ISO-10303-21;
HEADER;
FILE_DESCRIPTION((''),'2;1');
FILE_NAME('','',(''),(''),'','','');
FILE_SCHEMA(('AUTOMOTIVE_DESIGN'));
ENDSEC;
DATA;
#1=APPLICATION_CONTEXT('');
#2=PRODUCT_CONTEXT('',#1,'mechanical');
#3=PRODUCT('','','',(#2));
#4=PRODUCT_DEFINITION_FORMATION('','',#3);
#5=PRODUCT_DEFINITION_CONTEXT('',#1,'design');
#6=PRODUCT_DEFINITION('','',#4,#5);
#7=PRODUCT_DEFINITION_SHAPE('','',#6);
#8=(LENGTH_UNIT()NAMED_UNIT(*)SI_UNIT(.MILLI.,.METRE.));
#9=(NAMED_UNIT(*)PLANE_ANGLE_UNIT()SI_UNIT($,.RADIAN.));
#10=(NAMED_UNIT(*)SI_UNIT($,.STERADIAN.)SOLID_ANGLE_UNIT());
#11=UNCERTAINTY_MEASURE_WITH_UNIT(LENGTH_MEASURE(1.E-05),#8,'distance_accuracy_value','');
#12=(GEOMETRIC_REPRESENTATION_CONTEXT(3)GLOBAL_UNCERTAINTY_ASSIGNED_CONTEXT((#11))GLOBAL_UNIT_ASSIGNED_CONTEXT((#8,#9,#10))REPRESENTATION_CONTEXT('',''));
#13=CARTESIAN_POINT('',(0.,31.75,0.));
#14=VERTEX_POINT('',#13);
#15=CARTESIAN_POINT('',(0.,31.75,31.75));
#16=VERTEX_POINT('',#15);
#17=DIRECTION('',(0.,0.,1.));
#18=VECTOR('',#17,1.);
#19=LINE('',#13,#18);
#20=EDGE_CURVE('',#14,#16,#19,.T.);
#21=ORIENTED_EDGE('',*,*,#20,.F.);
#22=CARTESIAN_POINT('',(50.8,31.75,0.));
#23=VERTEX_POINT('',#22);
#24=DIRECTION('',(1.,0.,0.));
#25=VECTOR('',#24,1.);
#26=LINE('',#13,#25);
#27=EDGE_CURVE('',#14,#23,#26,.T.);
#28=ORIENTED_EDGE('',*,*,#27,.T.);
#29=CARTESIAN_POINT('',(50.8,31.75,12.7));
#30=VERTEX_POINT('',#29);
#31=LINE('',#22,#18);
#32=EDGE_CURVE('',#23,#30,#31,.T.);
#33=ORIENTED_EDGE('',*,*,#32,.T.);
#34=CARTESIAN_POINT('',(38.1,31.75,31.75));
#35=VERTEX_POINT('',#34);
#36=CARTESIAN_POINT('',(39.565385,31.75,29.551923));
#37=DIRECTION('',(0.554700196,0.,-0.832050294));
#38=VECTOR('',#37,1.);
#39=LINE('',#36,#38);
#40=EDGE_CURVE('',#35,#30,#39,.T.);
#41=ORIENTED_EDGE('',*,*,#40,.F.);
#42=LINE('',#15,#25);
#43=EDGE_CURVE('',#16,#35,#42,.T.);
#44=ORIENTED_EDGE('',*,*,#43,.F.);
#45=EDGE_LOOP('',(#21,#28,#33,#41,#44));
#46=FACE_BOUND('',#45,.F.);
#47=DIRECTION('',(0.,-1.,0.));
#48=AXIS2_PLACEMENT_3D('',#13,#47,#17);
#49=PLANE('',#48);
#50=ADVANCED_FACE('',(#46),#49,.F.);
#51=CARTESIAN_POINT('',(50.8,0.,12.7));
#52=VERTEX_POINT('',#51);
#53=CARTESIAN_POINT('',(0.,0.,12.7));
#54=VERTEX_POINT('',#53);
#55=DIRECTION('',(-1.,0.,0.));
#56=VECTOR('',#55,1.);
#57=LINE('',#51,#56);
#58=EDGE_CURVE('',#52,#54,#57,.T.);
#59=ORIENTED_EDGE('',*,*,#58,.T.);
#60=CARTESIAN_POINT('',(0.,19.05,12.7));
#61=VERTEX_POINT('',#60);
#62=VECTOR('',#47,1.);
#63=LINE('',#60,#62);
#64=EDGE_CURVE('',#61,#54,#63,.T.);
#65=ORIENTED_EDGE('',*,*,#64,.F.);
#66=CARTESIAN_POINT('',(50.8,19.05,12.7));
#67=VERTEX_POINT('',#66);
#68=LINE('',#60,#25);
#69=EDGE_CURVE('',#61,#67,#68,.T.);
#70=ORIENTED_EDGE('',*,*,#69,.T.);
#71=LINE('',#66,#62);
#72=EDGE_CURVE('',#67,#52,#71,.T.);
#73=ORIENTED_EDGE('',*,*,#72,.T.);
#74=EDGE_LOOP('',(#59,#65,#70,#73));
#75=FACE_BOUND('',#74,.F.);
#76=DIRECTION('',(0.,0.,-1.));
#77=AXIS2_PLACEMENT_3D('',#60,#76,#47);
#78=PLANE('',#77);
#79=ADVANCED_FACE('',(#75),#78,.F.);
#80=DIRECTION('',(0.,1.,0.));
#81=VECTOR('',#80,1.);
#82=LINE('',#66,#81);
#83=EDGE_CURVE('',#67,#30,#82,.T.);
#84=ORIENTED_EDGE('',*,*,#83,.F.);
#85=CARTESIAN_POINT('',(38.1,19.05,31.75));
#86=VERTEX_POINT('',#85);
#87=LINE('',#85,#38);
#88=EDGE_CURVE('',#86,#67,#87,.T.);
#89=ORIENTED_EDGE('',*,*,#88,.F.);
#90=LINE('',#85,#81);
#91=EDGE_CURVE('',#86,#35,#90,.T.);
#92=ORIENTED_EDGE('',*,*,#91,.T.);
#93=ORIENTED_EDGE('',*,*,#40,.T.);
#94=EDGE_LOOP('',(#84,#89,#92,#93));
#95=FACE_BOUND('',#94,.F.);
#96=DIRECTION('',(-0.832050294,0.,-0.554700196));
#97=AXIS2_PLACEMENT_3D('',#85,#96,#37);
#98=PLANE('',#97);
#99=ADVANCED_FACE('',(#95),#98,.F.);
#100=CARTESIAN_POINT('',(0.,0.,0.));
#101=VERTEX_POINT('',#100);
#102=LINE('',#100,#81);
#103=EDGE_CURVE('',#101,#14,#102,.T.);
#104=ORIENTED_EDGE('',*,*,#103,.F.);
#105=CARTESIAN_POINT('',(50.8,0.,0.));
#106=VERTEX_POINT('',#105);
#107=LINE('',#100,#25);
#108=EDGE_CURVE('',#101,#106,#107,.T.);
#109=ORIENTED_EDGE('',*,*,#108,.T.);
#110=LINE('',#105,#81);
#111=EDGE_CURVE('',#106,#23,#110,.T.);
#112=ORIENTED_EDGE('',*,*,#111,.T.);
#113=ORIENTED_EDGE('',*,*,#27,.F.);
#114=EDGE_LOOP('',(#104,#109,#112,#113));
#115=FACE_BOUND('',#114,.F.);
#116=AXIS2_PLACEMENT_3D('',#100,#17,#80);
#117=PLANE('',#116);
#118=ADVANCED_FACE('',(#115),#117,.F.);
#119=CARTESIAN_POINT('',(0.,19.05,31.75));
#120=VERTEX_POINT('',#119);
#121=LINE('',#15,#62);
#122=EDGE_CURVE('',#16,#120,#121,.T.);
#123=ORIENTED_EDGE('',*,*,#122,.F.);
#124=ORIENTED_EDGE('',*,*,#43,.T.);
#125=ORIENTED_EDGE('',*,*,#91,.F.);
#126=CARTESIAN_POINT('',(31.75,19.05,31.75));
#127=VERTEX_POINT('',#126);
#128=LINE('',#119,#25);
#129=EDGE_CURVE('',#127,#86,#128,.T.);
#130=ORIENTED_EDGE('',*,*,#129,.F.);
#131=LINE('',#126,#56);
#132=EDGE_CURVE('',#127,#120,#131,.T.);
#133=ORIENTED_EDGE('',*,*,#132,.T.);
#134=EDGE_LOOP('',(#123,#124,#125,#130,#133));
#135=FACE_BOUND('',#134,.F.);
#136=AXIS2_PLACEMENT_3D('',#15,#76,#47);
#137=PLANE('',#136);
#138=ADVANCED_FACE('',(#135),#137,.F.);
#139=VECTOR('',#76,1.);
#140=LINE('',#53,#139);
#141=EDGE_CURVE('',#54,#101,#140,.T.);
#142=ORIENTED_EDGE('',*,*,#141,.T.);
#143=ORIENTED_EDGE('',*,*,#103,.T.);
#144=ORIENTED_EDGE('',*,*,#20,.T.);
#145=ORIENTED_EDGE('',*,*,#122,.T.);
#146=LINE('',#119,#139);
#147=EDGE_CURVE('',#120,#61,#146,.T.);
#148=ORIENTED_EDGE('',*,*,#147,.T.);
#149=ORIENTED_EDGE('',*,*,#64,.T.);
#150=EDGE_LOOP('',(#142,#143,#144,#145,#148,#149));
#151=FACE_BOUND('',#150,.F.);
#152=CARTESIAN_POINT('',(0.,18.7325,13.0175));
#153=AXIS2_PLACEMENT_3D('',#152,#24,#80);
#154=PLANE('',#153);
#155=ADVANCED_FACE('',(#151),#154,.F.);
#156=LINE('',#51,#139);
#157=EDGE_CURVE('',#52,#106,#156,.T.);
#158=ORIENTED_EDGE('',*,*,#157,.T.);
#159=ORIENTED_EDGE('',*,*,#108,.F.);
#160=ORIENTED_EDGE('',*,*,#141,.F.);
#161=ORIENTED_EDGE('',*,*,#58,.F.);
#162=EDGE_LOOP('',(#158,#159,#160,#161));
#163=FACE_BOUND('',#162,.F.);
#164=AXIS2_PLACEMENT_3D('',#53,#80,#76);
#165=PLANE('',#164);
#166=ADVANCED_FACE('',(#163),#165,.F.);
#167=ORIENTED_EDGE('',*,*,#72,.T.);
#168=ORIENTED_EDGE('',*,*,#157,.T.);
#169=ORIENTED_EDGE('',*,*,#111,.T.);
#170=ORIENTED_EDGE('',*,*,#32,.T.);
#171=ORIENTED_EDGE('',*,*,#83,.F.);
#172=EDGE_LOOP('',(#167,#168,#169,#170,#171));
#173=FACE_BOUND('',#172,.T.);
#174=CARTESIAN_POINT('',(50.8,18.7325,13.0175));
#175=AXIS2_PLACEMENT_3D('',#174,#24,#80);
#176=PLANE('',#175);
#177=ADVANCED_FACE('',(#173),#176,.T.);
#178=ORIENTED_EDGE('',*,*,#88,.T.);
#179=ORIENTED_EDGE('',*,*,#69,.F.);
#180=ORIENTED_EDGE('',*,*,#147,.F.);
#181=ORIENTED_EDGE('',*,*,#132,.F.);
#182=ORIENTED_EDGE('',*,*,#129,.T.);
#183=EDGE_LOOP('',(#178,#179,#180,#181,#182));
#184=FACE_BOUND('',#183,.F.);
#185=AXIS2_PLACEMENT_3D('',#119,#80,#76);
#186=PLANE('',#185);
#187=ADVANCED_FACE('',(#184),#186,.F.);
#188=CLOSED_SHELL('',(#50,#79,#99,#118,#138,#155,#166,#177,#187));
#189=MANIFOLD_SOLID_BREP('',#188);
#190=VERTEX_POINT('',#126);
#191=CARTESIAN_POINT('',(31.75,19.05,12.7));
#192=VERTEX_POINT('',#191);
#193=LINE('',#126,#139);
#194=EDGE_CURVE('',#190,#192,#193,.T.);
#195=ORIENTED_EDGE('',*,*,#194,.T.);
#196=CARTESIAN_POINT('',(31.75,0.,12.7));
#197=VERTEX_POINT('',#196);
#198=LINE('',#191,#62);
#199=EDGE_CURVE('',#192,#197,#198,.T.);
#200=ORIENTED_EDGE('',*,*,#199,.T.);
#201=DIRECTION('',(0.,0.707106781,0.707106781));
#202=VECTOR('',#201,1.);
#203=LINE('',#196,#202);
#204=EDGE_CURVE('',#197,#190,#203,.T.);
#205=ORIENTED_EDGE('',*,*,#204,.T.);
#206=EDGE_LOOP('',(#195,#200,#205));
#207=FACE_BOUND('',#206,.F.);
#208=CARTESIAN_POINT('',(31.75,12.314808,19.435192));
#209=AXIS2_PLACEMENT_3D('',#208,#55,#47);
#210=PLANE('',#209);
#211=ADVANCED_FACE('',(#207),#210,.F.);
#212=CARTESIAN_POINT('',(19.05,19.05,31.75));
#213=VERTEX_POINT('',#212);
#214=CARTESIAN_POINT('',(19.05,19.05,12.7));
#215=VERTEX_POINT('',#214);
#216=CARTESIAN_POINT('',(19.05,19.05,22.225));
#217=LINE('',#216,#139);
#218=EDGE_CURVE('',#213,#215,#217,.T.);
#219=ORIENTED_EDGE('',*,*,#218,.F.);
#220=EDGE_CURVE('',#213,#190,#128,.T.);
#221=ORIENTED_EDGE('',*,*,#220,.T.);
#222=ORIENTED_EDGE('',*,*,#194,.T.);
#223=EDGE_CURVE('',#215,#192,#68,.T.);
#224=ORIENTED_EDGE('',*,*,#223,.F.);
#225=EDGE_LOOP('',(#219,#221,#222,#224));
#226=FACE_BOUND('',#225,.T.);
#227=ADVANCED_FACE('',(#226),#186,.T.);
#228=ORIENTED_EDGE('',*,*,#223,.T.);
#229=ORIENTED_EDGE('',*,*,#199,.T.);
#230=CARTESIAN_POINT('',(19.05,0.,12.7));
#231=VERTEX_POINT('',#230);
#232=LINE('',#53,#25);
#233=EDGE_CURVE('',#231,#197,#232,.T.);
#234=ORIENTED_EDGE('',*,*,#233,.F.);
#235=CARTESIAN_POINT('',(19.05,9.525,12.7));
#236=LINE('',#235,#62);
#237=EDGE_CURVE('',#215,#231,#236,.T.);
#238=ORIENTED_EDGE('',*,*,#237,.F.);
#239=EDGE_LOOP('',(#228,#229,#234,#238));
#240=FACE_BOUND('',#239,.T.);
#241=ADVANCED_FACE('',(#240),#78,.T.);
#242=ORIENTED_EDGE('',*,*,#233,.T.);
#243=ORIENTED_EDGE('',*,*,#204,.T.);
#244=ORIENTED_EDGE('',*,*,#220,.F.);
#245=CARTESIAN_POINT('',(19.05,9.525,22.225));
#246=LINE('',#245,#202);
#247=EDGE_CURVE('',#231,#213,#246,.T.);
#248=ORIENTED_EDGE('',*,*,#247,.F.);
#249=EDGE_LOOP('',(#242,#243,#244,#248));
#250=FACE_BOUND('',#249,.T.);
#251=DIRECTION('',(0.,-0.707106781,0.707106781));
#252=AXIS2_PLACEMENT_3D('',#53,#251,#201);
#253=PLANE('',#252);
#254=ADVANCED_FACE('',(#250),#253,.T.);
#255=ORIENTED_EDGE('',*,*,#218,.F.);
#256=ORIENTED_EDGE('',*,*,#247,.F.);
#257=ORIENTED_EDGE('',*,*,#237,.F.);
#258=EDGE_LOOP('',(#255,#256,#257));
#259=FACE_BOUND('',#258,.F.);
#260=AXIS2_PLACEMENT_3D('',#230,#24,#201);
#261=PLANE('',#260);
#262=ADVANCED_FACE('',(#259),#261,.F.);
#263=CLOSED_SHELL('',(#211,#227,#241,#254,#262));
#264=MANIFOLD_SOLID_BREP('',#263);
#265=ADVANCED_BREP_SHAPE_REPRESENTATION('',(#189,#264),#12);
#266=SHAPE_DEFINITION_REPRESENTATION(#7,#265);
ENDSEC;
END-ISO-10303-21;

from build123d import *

# Parameters (mm, degrees)
F1_DEPTH = 50.8
F3_DEPTH = 25.4
F5_DEPTH = 31.75
F6_W     = 12.7
F6_H     = 26.9407683632
F7_DEPTH = 19.05
F8_W     = 19.05
F8_H     = 26.9407683632
F9_DEPTH = 19.05


with BuildPart() as f1:
    # F0 (on Right) → F1 (new body)
    with BuildSketch(Plane.YZ):
        Polygon((0, 12.7), (0, 0), (31.75, 0), (31.75, 31.75), (19.05, 31.75), (19.05, 12.7), align=None)
    extrude(amount=F1_DEPTH)

    # F2 (on face) → F3 (cut)
    with BuildSketch(Plane.XZ.offset(-19.05)):
        Polygon((38.1, 31.75), (50.8, 12.7), (50.8, 31.75), align=None)
    extrude(amount=-F3_DEPTH, mode=Mode.SUBTRACT)

    # F6 (on face) → F7 (cut)
    with BuildSketch(Plane(origin=(0, -6.35, 6.35), x_dir=(1, 0, 0), z_dir=(0, -0.7071067812, 0.7071067812))):
        with Locations((25.4, 22.4506403027)):
            Rectangle(F6_W, F6_H)
    extrude(amount=F7_DEPTH, mode=Mode.SUBTRACT)


with BuildPart() as f5:
    # F4 (on face) → F5 (new body)
    with BuildSketch(Plane(origin=(0, 0, 0), x_dir=(0, -1, 0), z_dir=(-1, 0, 0))):
        Polygon((0, 12.7), (-19.05, 31.75), (-19.05, 12.7), align=None)
    extrude(amount=-F5_DEPTH)

    # F8 (on face) → F9 (cut)
    with BuildSketch(Plane(origin=(0, -6.35, 6.35), x_dir=(1, 0, 0), z_dir=(0, -0.7071067812, 0.7071067812))):
        with Locations((9.525, 22.4506403027)):
            Rectangle(F8_W, F8_H)
    extrude(amount=-F9_DEPTH, mode=Mode.SUBTRACT)


solid = Compound([f1.part, f5.part])
